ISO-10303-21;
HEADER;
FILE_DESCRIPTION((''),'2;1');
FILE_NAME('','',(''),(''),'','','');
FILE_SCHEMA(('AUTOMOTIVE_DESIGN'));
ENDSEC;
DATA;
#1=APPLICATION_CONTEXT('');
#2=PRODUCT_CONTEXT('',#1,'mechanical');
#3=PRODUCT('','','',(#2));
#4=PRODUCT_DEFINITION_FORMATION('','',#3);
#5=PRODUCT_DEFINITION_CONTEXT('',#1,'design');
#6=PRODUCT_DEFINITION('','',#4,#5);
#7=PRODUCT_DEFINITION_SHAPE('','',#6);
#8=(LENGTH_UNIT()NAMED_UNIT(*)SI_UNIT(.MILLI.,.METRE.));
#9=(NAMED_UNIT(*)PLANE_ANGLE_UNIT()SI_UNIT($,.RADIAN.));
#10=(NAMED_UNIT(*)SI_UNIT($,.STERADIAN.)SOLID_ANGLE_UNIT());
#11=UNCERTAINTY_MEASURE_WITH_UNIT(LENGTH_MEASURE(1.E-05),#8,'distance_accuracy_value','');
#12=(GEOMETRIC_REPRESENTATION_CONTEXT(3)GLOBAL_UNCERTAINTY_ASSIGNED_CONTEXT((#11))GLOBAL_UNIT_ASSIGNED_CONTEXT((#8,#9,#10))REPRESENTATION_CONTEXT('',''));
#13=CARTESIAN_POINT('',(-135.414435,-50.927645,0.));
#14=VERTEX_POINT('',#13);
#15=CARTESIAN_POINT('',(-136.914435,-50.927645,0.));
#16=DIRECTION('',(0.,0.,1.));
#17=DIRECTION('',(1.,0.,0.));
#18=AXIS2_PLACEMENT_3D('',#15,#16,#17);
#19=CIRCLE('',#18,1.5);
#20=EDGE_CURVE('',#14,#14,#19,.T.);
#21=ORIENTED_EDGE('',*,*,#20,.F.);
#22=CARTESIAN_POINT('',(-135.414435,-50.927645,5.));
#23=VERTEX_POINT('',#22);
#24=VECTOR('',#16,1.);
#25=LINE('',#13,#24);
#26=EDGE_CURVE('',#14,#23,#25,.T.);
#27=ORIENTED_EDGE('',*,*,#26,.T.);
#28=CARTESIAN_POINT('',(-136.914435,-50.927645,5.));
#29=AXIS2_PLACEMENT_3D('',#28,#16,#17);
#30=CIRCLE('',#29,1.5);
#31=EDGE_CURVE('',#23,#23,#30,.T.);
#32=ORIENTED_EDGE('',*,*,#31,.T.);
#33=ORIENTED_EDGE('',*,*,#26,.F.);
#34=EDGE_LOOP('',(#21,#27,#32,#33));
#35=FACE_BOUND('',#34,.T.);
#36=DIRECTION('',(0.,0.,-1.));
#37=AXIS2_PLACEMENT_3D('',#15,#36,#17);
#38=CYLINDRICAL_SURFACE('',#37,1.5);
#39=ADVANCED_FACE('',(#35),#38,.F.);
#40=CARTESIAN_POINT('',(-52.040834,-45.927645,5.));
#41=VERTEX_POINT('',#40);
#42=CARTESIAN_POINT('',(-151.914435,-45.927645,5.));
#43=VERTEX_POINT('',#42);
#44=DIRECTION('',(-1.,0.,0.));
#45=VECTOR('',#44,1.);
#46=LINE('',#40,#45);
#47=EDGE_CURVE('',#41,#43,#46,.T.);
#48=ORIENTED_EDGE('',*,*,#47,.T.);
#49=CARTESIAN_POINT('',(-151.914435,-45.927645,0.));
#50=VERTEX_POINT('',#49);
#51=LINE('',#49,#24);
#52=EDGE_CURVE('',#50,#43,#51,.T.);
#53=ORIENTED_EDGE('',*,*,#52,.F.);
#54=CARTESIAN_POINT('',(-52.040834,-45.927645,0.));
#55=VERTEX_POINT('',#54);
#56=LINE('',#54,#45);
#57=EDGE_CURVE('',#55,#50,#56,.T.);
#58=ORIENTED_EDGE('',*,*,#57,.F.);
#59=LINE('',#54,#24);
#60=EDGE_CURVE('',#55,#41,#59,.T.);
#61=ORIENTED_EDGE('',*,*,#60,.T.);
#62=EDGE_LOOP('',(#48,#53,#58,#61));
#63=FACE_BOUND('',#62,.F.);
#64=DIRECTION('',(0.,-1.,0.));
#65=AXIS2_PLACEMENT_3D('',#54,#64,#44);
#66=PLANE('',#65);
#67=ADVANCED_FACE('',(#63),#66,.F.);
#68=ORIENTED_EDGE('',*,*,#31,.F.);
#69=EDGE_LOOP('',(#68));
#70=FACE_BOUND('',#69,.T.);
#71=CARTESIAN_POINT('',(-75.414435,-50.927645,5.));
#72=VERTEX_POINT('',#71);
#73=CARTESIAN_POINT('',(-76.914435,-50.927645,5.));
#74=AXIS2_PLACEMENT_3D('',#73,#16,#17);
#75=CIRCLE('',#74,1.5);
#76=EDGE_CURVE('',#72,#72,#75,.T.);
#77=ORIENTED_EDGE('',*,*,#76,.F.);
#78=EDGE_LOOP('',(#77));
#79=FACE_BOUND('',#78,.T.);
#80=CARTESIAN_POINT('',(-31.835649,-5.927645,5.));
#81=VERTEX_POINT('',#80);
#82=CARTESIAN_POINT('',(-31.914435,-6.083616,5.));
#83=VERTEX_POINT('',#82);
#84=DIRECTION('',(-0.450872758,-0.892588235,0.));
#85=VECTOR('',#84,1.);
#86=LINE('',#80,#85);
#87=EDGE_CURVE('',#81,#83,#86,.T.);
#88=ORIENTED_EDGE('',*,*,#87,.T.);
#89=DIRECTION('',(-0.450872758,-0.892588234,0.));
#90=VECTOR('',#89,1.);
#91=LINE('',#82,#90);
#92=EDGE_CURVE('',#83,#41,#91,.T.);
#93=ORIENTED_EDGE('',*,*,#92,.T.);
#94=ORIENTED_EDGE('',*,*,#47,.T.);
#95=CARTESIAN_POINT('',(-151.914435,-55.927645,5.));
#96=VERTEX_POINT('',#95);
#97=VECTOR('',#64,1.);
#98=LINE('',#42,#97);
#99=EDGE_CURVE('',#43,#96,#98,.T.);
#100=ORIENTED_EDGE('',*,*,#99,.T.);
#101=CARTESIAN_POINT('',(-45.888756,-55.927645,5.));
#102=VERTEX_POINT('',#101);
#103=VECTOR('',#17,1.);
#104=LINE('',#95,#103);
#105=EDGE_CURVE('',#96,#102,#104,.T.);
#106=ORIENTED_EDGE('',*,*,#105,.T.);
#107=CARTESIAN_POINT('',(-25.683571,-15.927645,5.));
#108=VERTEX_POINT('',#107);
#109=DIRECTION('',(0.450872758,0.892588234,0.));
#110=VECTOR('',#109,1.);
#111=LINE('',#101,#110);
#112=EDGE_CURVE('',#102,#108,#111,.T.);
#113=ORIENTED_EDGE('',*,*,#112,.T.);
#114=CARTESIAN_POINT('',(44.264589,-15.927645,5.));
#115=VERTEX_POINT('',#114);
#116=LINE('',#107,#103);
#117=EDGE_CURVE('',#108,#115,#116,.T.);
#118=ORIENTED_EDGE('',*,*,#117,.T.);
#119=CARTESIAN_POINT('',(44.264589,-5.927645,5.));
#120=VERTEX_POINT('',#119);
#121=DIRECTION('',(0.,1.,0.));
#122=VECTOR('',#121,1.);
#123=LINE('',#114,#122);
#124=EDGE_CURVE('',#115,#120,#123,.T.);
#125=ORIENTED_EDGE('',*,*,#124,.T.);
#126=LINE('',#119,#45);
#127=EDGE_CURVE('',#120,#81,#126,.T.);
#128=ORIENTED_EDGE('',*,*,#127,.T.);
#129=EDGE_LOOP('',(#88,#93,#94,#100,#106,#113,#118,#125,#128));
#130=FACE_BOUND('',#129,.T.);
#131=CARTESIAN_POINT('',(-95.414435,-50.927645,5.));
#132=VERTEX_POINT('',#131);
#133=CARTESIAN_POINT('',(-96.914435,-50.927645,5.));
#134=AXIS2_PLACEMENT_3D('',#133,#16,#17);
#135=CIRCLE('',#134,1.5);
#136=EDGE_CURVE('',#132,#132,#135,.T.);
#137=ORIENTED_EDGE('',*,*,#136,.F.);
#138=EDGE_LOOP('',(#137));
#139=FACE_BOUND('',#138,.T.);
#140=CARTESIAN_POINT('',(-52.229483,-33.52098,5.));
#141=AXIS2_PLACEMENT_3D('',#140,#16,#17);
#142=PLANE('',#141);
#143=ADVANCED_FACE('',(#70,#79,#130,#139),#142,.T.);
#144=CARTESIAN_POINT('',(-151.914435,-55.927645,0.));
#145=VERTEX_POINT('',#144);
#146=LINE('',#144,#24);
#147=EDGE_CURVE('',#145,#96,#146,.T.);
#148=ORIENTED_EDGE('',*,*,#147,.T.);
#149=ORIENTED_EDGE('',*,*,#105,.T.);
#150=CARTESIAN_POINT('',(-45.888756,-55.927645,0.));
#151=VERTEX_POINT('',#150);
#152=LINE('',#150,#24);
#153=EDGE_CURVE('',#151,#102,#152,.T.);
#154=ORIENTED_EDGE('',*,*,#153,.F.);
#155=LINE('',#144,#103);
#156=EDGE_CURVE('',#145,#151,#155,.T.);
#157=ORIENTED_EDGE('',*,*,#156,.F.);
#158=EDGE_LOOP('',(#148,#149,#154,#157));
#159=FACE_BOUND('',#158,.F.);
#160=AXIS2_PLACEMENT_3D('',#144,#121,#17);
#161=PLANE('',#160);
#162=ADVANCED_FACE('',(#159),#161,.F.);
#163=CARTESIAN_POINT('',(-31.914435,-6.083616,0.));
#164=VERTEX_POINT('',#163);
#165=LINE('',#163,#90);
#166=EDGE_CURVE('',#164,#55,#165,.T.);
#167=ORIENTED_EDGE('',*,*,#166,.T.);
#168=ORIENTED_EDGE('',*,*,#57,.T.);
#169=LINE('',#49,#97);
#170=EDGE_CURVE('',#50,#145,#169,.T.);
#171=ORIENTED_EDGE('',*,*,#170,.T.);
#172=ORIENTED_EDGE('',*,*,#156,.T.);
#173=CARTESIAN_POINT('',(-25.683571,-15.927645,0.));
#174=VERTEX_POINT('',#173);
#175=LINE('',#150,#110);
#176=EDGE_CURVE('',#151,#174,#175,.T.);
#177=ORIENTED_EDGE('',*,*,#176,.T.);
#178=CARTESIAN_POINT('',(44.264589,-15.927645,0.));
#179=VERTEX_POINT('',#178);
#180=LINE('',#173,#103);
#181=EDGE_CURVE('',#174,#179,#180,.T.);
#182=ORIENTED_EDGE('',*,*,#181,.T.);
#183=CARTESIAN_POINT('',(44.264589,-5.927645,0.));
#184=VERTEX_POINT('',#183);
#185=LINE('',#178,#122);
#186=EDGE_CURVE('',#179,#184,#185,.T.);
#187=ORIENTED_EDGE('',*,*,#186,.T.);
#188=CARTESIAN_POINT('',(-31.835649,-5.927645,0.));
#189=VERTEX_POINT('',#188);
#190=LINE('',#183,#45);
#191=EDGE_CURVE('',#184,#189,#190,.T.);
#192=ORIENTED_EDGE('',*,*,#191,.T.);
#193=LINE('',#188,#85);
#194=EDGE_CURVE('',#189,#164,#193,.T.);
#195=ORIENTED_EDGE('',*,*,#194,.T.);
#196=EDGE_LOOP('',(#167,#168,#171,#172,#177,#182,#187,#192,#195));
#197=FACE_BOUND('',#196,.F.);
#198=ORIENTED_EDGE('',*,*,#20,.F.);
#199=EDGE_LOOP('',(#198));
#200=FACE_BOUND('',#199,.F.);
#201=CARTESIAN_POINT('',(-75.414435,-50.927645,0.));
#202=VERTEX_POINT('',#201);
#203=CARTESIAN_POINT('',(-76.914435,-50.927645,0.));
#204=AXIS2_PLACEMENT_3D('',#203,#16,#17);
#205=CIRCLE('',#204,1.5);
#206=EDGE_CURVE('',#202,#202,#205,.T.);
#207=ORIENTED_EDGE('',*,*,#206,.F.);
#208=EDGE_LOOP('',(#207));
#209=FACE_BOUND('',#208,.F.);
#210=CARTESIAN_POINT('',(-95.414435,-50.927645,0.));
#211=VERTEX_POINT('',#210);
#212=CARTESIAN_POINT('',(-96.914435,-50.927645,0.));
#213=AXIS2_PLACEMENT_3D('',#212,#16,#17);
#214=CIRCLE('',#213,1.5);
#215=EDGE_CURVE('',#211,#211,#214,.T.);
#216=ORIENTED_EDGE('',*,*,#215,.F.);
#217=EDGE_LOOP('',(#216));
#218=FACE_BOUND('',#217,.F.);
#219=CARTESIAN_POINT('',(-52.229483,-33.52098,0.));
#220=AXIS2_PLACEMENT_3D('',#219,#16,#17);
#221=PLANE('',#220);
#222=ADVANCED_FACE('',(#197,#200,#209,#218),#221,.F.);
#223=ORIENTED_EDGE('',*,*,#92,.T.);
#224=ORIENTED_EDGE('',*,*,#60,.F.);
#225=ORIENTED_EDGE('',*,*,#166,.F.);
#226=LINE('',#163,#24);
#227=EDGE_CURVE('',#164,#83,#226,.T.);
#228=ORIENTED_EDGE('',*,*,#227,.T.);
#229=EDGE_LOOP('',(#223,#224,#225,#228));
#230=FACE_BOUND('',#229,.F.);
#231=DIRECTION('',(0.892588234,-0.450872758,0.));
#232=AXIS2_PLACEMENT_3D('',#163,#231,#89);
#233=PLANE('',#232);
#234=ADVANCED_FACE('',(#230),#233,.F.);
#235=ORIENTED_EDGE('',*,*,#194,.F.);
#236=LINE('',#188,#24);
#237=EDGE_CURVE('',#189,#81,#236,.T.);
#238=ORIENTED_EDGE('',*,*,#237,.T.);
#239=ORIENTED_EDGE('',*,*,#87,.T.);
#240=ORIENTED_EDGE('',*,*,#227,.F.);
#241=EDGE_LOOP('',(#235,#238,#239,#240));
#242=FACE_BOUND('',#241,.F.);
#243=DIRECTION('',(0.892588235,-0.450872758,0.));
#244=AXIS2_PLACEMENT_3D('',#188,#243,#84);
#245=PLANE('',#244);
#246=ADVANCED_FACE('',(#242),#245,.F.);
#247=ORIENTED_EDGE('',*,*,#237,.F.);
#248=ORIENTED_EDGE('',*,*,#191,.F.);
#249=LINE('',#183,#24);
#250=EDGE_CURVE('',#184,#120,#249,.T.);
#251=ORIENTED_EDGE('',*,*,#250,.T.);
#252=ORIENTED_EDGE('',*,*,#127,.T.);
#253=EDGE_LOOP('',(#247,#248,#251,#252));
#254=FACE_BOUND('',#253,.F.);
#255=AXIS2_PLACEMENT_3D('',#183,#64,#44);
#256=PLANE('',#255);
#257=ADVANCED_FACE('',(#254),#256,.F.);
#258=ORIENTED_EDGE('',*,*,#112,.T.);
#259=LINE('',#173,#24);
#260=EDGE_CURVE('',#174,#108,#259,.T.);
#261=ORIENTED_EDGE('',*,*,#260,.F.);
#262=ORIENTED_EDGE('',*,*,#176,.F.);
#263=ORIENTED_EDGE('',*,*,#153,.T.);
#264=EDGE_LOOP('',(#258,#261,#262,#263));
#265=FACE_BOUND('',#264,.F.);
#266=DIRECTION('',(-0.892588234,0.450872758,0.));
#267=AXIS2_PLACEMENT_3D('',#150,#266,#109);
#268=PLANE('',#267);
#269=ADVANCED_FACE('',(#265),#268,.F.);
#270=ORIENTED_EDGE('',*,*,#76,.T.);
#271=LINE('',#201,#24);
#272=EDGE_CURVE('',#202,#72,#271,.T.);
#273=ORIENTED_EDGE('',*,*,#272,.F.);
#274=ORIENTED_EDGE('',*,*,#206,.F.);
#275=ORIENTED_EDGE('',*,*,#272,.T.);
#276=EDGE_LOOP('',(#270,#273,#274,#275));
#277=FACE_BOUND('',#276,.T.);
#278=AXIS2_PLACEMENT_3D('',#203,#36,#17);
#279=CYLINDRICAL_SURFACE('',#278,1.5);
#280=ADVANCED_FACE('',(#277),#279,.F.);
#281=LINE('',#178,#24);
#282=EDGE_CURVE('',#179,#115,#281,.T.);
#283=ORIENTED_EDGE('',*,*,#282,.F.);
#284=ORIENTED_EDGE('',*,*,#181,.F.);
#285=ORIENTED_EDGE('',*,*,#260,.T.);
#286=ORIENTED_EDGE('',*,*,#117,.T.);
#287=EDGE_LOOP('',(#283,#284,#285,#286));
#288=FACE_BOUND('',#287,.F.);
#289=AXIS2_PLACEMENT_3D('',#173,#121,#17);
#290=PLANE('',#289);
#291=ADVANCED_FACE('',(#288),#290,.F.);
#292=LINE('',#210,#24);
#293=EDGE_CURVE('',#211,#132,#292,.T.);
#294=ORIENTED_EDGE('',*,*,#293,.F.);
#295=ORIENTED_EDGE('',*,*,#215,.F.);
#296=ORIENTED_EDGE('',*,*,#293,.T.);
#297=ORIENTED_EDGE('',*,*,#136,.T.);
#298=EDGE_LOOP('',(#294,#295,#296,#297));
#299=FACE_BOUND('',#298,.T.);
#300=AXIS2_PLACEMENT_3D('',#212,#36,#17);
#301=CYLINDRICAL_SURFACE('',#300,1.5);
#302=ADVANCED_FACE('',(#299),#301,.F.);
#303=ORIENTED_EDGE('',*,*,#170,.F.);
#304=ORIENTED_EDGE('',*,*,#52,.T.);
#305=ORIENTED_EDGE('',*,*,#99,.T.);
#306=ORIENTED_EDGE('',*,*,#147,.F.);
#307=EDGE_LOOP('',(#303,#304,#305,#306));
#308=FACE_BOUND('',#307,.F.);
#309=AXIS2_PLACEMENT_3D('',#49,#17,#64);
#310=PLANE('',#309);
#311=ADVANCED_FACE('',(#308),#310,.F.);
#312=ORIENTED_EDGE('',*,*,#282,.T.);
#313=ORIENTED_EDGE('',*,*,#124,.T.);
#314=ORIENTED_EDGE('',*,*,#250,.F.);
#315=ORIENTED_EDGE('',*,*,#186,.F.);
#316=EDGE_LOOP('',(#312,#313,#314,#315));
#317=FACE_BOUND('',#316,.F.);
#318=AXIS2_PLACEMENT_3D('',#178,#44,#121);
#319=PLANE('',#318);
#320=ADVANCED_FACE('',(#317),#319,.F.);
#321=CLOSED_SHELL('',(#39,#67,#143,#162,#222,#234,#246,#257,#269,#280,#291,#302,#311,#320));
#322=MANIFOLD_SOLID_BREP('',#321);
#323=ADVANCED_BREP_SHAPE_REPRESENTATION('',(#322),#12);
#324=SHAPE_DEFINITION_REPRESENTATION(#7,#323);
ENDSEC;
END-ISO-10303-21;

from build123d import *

# Parameters (mm, degrees)
F0_R     = 1.5
F1_DEPTH = 5
F2_DEPTH = 265


# Not quite as in the source:
# - an extrude ends at something that could not be found from the text; its depth is read off the source's solid


with BuildPart() as f1:
    # F0 (on Top) → F1 (new body)
    with BuildSketch(Plane.XY):
        Polygon((-52.0408339798, -45.9276453106), (-151.9144345724, -45.9276453106), (-151.9144345724, -55.9276454151), (-45.8887560524, -55.9276454151), (-25.683571109, -15.9276453106), (27.9570557177, -15.9276453106), (44.264588505, -15.9276453106), (44.264588505, -5.9276453106), (27.9570557177, -5.9276453106), (-31.8356490892, -5.9276453106), (-31.9144345724, -6.0836161342), align=None)
        with Locations((-136.9144345724, -50.9276454151)):
            Circle(F0_R, mode=Mode.SUBTRACT)
        with Locations((-96.9144345724, -50.9276454151)):
            Circle(F0_R, mode=Mode.SUBTRACT)
        with Locations((-76.9144345724, -50.9276454151)):
            Circle(F0_R, mode=Mode.SUBTRACT)
    extrude(amount=F1_DEPTH)

    # F0 (on Top) → F2 (cut, through all)
    with BuildSketch(Plane.XY):
        with Locations((-76.9144345724, -50.9276454151)):
            Circle(F0_R)
        with Locations((-96.9144345724, -50.9276454151)):
            Circle(F0_R)
    extrude(amount=-F2_DEPTH, mode=Mode.SUBTRACT)


solid = f1.part
